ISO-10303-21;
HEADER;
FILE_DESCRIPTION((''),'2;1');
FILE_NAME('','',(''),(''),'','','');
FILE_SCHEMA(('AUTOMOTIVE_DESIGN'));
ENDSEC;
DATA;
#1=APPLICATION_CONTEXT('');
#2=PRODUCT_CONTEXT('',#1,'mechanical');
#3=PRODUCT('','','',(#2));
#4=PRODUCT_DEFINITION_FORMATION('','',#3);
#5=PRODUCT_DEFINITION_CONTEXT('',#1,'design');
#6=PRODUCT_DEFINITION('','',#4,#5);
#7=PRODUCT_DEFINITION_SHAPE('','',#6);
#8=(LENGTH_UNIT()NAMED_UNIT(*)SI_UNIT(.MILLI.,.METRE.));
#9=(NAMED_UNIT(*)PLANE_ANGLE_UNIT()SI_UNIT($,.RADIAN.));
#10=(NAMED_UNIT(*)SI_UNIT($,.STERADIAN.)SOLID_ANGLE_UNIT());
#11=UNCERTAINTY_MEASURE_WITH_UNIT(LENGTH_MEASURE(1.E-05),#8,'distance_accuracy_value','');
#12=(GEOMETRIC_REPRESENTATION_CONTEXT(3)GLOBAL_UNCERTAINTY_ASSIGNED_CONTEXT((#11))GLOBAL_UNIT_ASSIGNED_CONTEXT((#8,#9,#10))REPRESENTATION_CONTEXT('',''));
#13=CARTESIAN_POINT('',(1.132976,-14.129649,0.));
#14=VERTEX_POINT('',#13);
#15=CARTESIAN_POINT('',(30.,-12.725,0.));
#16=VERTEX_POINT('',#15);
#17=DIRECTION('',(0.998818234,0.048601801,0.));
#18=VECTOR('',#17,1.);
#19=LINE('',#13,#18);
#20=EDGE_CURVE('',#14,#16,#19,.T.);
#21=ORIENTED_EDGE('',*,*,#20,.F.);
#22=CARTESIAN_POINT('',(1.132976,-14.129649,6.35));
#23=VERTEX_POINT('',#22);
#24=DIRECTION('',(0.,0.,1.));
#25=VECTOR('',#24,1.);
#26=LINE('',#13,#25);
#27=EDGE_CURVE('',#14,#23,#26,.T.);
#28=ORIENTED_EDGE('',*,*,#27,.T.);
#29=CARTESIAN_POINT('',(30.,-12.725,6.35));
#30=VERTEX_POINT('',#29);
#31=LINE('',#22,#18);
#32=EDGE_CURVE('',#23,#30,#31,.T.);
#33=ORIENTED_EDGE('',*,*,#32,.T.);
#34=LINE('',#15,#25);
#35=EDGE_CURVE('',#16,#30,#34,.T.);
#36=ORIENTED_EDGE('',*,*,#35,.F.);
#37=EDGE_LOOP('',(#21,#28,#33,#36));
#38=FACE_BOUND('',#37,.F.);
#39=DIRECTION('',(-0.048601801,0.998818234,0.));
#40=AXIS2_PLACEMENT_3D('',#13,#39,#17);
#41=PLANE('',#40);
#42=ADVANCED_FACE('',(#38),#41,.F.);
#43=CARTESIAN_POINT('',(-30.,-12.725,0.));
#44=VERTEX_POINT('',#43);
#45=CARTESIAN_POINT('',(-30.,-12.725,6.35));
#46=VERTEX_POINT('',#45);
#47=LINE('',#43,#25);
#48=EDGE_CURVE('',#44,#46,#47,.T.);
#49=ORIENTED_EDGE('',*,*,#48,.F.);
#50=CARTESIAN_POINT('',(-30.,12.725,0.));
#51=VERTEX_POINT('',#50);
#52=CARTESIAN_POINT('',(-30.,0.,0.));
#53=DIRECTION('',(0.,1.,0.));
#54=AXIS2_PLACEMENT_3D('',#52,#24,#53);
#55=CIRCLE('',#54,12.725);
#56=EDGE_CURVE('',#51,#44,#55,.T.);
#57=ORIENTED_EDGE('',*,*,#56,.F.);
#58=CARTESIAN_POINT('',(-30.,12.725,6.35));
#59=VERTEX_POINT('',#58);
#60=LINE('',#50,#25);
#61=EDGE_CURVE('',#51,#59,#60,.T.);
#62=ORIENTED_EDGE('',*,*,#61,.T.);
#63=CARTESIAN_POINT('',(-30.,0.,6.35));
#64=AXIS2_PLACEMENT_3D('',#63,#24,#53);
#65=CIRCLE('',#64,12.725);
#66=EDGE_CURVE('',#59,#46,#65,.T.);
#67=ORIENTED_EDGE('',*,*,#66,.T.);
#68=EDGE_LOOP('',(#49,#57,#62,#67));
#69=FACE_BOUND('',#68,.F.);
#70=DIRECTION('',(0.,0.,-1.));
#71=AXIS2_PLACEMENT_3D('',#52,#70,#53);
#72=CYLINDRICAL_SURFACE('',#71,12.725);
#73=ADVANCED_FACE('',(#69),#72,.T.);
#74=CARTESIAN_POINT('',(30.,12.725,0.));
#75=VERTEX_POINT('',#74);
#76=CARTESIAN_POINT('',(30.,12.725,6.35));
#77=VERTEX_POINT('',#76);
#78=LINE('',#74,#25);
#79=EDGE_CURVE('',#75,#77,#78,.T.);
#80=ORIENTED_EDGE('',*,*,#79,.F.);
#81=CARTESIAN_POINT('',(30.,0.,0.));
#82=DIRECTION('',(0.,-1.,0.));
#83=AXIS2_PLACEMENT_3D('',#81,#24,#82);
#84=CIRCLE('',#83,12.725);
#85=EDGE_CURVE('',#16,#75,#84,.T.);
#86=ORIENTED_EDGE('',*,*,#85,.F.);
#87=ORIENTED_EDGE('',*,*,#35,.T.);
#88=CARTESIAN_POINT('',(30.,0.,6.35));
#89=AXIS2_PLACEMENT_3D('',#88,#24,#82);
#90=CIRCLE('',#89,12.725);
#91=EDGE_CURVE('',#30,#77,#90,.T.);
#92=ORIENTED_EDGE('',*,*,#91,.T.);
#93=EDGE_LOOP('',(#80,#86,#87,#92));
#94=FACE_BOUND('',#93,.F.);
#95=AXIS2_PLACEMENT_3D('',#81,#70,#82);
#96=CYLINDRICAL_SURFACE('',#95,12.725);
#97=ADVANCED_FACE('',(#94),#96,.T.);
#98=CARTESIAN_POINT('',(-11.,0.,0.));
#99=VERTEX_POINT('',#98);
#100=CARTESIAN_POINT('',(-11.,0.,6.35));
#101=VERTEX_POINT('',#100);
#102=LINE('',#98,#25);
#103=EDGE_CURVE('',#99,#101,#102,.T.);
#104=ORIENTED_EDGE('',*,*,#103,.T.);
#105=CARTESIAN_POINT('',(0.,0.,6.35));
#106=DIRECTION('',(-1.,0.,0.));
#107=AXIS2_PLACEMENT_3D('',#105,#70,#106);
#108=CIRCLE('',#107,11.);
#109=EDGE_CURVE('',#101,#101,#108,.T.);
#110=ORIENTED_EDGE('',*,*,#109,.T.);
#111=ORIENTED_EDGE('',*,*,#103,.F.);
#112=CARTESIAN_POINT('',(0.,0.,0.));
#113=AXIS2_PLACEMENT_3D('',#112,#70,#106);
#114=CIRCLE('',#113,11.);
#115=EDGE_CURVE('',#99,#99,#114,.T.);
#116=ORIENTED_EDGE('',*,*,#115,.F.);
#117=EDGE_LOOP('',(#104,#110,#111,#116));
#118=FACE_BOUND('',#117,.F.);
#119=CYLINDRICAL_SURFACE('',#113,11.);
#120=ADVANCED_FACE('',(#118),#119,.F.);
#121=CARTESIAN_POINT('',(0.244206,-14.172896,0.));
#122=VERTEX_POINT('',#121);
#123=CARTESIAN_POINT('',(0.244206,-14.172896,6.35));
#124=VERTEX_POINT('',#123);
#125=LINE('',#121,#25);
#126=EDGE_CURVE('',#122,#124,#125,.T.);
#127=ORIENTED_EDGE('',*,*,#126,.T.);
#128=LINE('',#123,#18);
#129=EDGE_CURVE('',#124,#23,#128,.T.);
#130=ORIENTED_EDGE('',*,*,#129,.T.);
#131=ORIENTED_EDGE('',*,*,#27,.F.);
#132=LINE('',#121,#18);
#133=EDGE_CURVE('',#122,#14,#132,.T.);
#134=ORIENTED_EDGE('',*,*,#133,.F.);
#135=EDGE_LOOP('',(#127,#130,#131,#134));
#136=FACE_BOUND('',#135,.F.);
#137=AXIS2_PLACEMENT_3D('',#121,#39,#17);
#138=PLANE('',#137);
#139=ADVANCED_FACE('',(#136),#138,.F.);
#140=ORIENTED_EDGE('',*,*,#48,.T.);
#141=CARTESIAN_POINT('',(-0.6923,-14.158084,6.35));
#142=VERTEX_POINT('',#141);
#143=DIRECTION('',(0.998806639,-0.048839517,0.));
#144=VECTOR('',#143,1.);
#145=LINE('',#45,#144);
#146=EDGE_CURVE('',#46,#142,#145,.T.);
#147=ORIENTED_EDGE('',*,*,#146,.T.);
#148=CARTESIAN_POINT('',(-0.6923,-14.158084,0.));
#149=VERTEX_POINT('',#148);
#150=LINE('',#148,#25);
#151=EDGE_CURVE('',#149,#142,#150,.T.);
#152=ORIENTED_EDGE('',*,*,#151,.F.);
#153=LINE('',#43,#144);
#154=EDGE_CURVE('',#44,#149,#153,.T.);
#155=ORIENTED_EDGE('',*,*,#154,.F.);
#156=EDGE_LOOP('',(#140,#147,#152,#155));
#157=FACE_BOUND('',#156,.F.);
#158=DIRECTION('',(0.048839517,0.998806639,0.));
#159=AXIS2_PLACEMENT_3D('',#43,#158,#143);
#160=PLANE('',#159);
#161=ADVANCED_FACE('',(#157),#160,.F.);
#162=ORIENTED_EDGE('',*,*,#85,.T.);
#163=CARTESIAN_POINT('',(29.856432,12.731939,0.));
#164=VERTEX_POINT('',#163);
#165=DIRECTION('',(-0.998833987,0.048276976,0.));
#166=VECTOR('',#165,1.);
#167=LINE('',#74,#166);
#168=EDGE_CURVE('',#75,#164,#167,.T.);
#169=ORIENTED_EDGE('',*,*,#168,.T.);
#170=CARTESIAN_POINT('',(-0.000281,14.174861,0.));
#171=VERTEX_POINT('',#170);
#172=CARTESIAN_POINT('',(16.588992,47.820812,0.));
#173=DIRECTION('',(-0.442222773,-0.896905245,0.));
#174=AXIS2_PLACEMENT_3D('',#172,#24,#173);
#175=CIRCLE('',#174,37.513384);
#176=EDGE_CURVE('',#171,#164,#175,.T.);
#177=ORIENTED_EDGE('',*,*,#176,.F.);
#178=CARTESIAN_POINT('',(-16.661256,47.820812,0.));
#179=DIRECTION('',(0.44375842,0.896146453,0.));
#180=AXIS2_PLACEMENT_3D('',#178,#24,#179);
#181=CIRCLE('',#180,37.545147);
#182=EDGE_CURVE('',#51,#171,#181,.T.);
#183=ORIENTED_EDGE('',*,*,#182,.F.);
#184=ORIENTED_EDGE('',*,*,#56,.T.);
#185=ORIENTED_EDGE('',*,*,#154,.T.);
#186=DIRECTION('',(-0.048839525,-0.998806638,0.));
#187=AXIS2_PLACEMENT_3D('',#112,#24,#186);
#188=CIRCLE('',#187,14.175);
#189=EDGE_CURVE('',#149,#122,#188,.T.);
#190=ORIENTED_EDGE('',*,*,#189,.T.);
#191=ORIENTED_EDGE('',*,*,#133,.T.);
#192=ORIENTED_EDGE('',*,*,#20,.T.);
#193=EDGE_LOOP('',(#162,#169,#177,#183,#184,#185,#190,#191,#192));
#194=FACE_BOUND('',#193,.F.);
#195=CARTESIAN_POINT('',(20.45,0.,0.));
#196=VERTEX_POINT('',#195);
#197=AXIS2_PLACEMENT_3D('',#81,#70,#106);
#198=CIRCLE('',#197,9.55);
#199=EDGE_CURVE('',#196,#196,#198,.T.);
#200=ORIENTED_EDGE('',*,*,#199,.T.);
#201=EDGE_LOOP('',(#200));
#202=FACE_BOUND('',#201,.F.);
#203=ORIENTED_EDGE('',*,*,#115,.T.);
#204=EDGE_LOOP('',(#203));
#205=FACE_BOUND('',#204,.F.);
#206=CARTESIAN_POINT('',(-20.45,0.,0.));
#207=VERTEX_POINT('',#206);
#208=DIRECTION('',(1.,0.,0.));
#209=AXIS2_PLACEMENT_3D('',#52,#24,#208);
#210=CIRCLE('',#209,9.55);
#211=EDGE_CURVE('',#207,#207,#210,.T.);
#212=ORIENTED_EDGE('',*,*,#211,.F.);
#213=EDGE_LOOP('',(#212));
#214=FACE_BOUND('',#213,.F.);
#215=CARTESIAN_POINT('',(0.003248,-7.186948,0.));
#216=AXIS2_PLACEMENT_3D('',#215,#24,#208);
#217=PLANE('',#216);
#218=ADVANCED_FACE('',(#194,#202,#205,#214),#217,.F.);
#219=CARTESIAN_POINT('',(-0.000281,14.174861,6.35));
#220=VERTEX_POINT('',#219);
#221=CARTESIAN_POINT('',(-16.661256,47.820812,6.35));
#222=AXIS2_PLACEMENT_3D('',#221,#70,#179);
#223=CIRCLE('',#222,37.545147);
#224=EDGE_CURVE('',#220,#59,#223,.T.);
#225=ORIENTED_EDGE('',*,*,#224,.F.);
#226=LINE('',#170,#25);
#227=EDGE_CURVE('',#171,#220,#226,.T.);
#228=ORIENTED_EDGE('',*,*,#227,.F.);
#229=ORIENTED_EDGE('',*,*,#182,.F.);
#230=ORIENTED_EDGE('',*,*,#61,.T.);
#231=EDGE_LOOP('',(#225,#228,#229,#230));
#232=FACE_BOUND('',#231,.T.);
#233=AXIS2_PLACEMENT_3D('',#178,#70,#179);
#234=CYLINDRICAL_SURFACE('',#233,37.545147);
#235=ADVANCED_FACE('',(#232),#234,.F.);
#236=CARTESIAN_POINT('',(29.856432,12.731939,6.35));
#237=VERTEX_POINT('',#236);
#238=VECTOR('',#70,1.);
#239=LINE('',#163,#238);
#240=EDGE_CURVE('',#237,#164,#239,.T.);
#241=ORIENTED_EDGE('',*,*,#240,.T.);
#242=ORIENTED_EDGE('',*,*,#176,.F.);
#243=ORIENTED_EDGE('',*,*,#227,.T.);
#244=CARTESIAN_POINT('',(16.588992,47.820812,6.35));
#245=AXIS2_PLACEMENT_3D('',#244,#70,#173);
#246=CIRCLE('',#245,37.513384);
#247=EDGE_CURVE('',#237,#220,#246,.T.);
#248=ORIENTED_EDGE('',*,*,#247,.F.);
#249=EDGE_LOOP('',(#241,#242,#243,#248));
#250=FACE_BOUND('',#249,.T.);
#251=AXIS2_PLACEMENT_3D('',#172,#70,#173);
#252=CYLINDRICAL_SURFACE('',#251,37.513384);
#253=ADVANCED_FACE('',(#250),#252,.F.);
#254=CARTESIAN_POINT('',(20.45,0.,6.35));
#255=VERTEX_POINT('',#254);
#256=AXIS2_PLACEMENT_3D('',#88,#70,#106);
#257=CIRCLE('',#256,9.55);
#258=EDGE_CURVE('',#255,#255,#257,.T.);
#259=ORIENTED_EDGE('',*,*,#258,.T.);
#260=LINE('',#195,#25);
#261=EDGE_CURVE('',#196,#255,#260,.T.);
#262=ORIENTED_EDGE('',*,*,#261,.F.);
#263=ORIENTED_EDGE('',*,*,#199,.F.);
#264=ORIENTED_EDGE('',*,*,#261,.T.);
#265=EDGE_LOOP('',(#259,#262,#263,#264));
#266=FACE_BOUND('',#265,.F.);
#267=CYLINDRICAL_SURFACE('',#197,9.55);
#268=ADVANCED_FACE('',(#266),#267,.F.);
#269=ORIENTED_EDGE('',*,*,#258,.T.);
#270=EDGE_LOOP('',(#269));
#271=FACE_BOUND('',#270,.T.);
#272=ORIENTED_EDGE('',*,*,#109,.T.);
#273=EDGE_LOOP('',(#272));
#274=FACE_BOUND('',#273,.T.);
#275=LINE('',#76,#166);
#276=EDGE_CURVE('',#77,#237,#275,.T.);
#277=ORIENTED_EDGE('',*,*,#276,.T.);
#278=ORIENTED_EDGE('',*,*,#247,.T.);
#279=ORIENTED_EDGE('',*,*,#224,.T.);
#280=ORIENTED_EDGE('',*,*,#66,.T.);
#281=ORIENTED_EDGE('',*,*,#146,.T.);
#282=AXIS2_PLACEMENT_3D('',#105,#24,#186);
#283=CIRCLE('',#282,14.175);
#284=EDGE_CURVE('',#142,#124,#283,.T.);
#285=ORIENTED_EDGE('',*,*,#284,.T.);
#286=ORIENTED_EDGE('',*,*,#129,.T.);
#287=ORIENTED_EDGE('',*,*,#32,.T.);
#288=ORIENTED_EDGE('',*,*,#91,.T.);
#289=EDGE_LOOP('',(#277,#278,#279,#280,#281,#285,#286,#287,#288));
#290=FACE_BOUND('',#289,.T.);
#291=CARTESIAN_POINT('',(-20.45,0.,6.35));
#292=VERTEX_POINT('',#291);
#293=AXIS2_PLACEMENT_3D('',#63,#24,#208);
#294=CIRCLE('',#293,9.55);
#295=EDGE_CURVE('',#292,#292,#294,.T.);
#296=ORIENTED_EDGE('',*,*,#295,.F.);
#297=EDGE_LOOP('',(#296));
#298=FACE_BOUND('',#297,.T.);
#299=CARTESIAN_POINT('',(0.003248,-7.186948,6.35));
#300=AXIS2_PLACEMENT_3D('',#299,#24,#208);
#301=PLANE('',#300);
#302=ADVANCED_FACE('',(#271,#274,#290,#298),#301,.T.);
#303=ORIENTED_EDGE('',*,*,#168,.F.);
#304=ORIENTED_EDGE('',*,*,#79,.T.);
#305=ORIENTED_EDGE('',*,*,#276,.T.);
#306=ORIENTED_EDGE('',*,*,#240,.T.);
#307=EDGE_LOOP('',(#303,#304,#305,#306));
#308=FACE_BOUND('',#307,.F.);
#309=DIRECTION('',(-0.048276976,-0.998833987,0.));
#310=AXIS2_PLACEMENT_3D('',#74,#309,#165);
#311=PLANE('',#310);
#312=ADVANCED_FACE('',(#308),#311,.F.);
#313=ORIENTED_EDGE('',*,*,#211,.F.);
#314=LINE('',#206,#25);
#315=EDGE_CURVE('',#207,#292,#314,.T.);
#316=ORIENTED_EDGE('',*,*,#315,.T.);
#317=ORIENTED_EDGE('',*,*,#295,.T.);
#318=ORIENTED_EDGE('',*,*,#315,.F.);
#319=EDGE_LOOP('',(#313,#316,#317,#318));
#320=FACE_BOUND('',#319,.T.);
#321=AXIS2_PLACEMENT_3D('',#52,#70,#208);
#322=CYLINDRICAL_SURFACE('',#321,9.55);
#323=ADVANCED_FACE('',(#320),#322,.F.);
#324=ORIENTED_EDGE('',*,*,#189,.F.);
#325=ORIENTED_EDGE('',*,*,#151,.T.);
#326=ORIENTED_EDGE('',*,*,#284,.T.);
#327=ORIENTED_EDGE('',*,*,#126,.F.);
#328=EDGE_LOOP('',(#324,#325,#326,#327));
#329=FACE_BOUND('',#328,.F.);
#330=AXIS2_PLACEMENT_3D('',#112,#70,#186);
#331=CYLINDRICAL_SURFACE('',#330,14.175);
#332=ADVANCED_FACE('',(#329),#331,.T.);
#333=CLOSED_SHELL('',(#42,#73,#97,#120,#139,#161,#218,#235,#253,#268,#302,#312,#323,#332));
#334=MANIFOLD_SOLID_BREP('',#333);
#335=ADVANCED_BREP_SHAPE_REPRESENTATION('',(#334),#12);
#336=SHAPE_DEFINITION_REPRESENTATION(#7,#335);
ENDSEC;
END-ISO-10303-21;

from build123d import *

# Parameters (mm, degrees)
F0_R     = 9.55
F1_DEPTH = 6.35
F3_DEPTH = 25


# Not quite as in the source:
# - a feature names something its author has since deleted; it is built from what else it names


with BuildPart() as f1:
    # F0 (on Top) → F1 (new body)
    with BuildSketch(Plane.XY):
        with BuildLine():
            Line((14.175, 0), (11, 0))
            ThreePointArc((11, 0), (0, -11), (-11, 0))
            Line((-11, 0), (-14.175, 0))
            ThreePointArc((-14.175, 0), (-10.265086005, -9.7754096748), (-0.6923002736, -14.1580840982))
            ThreePointArc((-0.6923002736, -14.1580840982), (-0.2241695179, -14.1732273328), (0.2442059858, -14.1728962614))
            Line((0.2442059858, -14.1728962614), (1.1329762166, -14.1296493195))
            ThreePointArc((1.1329762166, -14.1296493195), (10.4161068272, -9.6143301152), (14.175, 0))
        make_face()
        with BuildLine():
            ThreePointArc((-11, 0), (0, 11), (11, 0))
            Line((11, 0), (14.175, 0))
            ThreePointArc((14.175, 0), (10.4954430476, 9.5276597459), (1.3670564043, 14.1089256071))
            Line((1.3670564043, 14.1089256071), (0, 14.175))
            Line((0, 14.175), (-1.3670564043, 14.1089256071))
            ThreePointArc((-1.3670564043, 14.1089256071), (-10.4954430476, 9.5276597459), (-14.175, 0))
            Line((-14.175, 0), (-11, 0))
        make_face()
        with BuildLine():
            Line((17.275, 0), (14.175, 0))
            ThreePointArc((14.175, 0), (10.4161068272, -9.6143301152), (1.1329762166, -14.1296493195))
            Line((1.1329762166, -14.1296493195), (30, -12.725))
            ThreePointArc((30, -12.725), (21.0020662094, -8.9979337906), (17.275, 0))
        make_face()
        with BuildLine():
            ThreePointArc((1.3670564043, 14.1089256071), (10.4954430476, 9.5276597459), (14.175, 0))
            Line((14.175, 0), (17.275, 0))
            ThreePointArc((17.275, 0), (21.0020662094, 8.9979337906), (30, 12.725))
            Line((30, 12.725), (1.3670564043, 14.1089256071))
        make_face()
        with BuildLine():
            Line((-17.275, 0), (-14.175, 0))
            ThreePointArc((-14.175, 0), (-10.4954430476, 9.5276597459), (-1.3670564043, 14.1089256071))
            Line((-1.3670564043, 14.1089256071), (-30, 12.725))
            ThreePointArc((-30, 12.725), (-21.0020662094, 8.9979337906), (-17.275, 0))
        make_face()
        with BuildLine():
            ThreePointArc((-0.6923002736, -14.1580840982), (-10.265086005, -9.7754096748), (-14.175, 0))
            Line((-14.175, 0), (-17.275, 0))
            ThreePointArc((-17.275, 0), (-21.0020662094, -8.9979337906), (-30, -12.725))
            Line((-30, -12.725), (-0.6923002736, -14.1580840982))
        make_face()
        with BuildLine():
            ThreePointArc((30, 12.725), (21.0020662094, 8.9979337906), (17.275, 0))
            ThreePointArc((17.275, 0), (21.0020662094, -8.9979337906), (30, -12.725))
            ThreePointArc((30, -12.725), (38.9979337906, -8.9979337906), (42.725, 0))
            ThreePointArc((42.725, 0), (38.9979337906, 8.9979337906), (30, 12.725))
        make_face()
        with BuildLine():
            ThreePointArc((39.55, 0), (30, -9.55), (20.45, 0))
            ThreePointArc((20.45, 0), (30, 9.55), (39.55, 0))
        make_face(mode=Mode.SUBTRACT)
        with BuildLine():
            ThreePointArc((-30, -12.725), (-21.0020662094, -8.9979337906), (-17.275, 0))
            ThreePointArc((-17.275, 0), (-21.0020662094, 8.9979337906), (-30, 12.725))
            ThreePointArc((-30, 12.725), (-42.725, 0), (-30, -12.725))
        make_face()
        with Locations((-30, 0)):
            Circle(F0_R, mode=Mode.SUBTRACT)
    extrude(amount=F1_DEPTH)

    # F2 (on Top) → F3 (cut)
    with BuildSketch(Plane.XY):
        with BuildLine():
            ThreePointArc((-0.0002806461, 14.1748610267), (-20.9243917712, 47.820811609), (-0.0002806461, 81.4667621913))
            ThreePointArc((-0.0002806461, 81.4667621913), (-54.2064032082, 47.820811609), (-0.0002806461, 14.1748610267))
        make_face()
        with BuildLine():
            ThreePointArc((-0.0002806461, 14.1748610267), (15.2384059917, 28.0205677125), (20.8838914193, 47.820811609))
            ThreePointArc((20.8838914193, 47.820811609), (15.2384059917, 67.6210555055), (-0.0002806461, 81.4667621913))
            ThreePointArc((-0.0002806461, 81.4667621913), (-20.9243917712, 47.820811609), (-0.0002806461, 14.1748610267))
        make_face()
        with BuildLine():
            ThreePointArc((-0.0002806461, 81.4667621913), (15.2384059917, 67.6210555055), (20.8838914193, 47.820811609))
            ThreePointArc((20.8838914193, 47.820811609), (15.2384059917, 28.0205677125), (-0.0002806461, 14.1748610267))
            ThreePointArc((-0.0002806461, 14.1748610267), (36.3997744183, 15.9650923463), (54.1023755584, 47.820811609))
            ThreePointArc((54.1023755584, 47.820811609), (36.3997744183, 79.6765308717), (-0.0002806461, 81.4667621913))
        make_face()
    extrude(amount=F3_DEPTH, mode=Mode.SUBTRACT)


solid = f1.part
